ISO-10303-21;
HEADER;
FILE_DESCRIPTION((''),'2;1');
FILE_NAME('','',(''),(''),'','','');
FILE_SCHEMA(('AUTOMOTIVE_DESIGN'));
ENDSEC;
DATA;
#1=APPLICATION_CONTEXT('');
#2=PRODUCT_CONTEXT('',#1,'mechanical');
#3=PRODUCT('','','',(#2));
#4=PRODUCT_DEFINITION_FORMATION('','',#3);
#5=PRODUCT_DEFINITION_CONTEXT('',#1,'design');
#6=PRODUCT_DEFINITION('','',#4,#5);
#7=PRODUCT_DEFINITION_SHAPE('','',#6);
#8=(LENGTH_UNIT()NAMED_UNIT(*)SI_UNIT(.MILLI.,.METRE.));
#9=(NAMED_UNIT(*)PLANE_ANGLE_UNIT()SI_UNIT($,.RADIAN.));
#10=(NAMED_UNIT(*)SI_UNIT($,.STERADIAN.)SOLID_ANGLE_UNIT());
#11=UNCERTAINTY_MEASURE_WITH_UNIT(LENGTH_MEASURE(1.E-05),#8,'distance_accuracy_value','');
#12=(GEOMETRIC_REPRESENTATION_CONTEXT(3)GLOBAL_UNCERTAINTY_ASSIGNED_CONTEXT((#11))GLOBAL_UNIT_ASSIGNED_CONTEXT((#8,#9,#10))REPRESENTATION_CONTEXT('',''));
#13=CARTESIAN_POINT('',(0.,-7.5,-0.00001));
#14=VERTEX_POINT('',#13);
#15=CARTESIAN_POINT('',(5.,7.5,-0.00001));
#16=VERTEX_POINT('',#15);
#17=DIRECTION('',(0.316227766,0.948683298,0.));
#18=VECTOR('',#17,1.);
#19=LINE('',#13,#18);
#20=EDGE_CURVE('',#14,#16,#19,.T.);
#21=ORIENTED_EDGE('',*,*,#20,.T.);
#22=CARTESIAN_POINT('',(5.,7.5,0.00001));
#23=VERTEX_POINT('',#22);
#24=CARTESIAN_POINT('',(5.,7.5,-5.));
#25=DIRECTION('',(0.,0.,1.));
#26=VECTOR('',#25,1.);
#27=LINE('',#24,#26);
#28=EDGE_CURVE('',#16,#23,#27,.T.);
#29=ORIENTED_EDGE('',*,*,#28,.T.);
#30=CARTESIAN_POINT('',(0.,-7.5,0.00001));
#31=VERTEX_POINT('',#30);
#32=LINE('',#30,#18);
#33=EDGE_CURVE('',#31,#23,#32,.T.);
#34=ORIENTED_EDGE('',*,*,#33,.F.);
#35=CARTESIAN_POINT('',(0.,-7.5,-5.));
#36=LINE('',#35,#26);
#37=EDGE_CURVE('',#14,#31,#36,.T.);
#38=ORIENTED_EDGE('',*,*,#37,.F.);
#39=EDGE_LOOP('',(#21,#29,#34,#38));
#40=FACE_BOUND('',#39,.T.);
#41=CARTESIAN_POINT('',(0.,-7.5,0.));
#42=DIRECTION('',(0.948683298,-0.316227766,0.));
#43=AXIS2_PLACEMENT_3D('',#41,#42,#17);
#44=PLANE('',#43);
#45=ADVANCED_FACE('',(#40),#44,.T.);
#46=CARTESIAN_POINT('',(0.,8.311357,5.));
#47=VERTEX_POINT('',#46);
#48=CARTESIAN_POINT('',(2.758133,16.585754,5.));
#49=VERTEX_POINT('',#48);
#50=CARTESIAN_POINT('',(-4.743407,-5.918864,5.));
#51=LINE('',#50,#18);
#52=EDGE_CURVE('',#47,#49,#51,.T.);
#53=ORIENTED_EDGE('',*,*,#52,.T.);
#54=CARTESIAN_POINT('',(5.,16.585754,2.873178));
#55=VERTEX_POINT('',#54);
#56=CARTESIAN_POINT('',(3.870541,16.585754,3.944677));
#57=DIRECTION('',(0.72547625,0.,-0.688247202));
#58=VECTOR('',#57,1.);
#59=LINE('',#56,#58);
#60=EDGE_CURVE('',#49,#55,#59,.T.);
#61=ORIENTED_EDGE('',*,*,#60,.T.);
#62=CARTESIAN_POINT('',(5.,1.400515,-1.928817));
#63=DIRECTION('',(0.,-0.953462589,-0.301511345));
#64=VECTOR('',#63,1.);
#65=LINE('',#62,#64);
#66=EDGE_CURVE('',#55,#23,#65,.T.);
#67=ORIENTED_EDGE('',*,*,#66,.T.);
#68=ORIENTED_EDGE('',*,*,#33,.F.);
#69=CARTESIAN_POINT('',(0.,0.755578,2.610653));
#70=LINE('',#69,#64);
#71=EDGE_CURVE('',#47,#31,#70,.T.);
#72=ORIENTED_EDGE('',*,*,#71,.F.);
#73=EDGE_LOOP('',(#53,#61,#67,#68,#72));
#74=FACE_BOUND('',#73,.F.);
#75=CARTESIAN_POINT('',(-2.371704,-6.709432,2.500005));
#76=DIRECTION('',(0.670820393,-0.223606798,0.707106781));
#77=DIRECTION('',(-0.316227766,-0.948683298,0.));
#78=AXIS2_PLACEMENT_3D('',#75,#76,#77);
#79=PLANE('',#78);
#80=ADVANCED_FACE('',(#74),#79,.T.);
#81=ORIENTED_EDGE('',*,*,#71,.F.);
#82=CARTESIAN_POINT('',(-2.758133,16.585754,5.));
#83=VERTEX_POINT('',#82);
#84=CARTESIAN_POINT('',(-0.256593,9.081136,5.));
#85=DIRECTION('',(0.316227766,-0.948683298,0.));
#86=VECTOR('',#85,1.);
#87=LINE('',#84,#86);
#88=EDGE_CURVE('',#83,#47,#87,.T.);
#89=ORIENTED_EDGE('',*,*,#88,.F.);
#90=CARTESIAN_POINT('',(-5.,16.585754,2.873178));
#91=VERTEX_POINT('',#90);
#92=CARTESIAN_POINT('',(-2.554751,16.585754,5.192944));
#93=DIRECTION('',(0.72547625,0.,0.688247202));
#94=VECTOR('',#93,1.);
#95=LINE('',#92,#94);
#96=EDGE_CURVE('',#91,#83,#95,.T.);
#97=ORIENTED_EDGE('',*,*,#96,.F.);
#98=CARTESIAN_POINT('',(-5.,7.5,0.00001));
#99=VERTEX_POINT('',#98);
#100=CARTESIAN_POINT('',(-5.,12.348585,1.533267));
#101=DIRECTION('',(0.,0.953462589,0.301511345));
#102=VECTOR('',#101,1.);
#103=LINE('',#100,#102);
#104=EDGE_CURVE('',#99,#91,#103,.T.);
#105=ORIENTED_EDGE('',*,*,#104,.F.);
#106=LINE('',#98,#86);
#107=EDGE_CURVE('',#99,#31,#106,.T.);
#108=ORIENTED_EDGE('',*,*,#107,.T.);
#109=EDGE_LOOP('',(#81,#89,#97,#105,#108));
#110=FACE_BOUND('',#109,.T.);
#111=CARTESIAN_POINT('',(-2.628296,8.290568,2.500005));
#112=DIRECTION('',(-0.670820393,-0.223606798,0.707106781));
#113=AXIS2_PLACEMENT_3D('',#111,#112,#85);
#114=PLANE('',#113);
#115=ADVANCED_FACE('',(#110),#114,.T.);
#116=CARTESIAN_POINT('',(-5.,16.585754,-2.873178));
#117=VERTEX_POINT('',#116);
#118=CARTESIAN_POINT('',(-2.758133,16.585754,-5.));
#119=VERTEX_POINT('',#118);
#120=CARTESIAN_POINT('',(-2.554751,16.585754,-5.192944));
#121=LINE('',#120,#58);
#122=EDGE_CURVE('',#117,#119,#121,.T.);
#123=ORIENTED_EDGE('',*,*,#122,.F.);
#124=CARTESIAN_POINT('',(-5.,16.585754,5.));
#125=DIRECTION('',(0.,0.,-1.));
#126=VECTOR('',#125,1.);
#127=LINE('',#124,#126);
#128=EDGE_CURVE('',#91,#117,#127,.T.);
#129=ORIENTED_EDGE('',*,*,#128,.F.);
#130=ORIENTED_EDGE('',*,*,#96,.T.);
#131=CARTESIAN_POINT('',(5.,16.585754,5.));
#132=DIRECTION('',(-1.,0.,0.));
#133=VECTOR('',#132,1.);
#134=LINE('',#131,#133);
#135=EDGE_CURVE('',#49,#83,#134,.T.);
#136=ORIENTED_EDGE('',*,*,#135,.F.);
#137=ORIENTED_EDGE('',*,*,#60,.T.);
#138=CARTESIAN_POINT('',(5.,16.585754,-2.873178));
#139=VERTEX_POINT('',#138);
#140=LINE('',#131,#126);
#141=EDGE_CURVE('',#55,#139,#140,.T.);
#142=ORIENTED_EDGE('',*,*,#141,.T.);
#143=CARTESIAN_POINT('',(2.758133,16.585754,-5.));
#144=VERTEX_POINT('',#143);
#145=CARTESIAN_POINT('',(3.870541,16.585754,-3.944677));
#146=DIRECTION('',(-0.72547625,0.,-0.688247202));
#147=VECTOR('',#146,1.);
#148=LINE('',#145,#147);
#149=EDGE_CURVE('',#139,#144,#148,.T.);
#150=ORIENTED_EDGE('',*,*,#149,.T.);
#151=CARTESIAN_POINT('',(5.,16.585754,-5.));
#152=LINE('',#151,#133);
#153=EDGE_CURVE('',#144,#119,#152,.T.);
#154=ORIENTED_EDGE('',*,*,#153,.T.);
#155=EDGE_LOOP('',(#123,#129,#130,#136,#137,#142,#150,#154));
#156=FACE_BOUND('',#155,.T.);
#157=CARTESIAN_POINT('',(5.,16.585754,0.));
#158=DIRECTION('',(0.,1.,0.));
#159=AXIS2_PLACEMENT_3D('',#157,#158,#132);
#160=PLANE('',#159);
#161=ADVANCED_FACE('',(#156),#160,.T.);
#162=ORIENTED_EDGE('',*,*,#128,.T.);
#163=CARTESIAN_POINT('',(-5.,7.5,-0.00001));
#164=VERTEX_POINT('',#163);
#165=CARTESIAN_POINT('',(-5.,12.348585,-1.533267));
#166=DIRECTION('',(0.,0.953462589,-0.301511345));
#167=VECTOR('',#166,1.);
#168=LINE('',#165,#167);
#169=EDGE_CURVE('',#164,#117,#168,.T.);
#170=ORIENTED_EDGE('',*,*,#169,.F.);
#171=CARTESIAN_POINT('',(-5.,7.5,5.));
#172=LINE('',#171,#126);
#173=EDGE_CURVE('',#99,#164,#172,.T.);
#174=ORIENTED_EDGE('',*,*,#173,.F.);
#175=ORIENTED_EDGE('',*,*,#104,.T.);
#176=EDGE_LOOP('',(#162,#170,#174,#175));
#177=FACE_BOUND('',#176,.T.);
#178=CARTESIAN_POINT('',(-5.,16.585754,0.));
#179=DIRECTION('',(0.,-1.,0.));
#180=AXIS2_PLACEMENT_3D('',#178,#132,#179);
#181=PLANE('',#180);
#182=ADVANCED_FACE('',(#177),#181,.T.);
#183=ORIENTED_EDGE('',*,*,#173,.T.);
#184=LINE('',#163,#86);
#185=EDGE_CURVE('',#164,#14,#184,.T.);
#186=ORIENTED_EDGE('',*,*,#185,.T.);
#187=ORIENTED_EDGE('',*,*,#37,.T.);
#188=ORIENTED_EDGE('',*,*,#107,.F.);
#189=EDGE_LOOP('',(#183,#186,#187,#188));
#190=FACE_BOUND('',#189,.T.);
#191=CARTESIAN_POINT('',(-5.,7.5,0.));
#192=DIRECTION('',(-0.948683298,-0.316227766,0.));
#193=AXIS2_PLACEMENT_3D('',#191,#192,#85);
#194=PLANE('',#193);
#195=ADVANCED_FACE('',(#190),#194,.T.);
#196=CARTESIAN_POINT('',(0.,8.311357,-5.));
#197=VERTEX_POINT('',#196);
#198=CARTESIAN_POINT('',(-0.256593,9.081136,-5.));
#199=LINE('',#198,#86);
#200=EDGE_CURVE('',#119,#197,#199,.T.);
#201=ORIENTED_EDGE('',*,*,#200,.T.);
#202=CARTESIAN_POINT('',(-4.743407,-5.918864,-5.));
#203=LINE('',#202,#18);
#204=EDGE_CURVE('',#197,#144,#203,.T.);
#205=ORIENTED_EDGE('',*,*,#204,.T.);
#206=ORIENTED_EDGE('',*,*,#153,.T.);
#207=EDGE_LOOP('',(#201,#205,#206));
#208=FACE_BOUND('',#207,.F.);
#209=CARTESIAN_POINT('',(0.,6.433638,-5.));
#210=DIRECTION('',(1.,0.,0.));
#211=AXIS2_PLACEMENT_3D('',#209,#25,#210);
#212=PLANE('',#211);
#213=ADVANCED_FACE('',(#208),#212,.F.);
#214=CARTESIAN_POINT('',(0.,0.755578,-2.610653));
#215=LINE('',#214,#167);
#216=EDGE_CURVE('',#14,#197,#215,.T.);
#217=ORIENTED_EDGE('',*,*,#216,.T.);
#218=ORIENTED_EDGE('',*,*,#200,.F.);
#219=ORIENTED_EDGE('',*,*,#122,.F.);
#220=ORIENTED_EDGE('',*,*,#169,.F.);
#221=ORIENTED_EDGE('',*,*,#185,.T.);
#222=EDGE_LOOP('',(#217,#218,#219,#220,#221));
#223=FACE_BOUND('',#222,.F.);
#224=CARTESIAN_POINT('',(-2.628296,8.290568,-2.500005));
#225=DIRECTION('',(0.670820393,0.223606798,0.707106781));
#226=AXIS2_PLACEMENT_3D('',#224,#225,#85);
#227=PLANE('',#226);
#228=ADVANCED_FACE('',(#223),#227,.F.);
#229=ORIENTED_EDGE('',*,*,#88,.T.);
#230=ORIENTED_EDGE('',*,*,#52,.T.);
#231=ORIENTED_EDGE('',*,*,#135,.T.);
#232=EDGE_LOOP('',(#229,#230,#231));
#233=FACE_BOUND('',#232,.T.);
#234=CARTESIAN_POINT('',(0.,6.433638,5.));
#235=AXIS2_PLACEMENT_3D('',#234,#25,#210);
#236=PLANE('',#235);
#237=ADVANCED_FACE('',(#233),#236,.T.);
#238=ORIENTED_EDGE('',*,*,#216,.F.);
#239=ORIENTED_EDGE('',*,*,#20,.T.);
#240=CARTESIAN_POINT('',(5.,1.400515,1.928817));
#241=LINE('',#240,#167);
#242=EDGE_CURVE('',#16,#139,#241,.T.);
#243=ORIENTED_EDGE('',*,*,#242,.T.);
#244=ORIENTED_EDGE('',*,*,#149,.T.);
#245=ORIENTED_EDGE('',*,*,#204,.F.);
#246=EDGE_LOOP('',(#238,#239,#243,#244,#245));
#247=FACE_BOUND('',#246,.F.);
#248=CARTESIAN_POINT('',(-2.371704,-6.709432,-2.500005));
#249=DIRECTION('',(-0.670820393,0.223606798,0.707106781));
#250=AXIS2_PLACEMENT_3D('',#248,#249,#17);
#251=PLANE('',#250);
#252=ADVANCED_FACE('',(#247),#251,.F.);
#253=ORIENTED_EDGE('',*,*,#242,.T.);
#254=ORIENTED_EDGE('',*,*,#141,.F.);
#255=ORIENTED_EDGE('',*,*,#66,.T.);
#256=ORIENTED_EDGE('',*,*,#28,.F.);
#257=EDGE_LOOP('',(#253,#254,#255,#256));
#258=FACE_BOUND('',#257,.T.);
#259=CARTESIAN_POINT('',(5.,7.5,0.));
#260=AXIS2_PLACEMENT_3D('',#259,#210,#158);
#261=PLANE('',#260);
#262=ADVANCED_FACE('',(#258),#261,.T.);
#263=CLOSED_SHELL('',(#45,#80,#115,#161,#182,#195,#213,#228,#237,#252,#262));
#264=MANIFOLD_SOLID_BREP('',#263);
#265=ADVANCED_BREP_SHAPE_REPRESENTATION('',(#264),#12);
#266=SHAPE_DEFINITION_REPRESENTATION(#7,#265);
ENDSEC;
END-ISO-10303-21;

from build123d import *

# Parameters (mm, degrees)
F1_DEPTH = 5
F2_SIZE  = 4.99999


# Not quite as in the source:
# - a fillet or chamfer is up to 0.001 mm smaller than in the source, because OpenCascade refuses the exact size


with BuildPart() as f1:
    # F0 (on Top) → F1 (new body, symmetric)
    with BuildSketch(Plane.XY):
        Polygon((-5, 7.5), (0, -7.5), (5, 7.5), (5, 16.5857542306), (-5, 16.5857542306), align=None)
    extrude(amount=F1_DEPTH, both=True)

    # F2 (size 5 in the source; OpenCascade refuses exactly that, so slightly less here)
    f2_edges = [f1.edges().sort_by_distance(p)[0] for p in [
        (2.5, 0, -5),
        (-2.5, 0, -5),
        (2.5, 0, 5),
        (-2.5, 0, 5),
    ]]
    chamfer(f2_edges, length=F2_SIZE)


solid = f1.part
